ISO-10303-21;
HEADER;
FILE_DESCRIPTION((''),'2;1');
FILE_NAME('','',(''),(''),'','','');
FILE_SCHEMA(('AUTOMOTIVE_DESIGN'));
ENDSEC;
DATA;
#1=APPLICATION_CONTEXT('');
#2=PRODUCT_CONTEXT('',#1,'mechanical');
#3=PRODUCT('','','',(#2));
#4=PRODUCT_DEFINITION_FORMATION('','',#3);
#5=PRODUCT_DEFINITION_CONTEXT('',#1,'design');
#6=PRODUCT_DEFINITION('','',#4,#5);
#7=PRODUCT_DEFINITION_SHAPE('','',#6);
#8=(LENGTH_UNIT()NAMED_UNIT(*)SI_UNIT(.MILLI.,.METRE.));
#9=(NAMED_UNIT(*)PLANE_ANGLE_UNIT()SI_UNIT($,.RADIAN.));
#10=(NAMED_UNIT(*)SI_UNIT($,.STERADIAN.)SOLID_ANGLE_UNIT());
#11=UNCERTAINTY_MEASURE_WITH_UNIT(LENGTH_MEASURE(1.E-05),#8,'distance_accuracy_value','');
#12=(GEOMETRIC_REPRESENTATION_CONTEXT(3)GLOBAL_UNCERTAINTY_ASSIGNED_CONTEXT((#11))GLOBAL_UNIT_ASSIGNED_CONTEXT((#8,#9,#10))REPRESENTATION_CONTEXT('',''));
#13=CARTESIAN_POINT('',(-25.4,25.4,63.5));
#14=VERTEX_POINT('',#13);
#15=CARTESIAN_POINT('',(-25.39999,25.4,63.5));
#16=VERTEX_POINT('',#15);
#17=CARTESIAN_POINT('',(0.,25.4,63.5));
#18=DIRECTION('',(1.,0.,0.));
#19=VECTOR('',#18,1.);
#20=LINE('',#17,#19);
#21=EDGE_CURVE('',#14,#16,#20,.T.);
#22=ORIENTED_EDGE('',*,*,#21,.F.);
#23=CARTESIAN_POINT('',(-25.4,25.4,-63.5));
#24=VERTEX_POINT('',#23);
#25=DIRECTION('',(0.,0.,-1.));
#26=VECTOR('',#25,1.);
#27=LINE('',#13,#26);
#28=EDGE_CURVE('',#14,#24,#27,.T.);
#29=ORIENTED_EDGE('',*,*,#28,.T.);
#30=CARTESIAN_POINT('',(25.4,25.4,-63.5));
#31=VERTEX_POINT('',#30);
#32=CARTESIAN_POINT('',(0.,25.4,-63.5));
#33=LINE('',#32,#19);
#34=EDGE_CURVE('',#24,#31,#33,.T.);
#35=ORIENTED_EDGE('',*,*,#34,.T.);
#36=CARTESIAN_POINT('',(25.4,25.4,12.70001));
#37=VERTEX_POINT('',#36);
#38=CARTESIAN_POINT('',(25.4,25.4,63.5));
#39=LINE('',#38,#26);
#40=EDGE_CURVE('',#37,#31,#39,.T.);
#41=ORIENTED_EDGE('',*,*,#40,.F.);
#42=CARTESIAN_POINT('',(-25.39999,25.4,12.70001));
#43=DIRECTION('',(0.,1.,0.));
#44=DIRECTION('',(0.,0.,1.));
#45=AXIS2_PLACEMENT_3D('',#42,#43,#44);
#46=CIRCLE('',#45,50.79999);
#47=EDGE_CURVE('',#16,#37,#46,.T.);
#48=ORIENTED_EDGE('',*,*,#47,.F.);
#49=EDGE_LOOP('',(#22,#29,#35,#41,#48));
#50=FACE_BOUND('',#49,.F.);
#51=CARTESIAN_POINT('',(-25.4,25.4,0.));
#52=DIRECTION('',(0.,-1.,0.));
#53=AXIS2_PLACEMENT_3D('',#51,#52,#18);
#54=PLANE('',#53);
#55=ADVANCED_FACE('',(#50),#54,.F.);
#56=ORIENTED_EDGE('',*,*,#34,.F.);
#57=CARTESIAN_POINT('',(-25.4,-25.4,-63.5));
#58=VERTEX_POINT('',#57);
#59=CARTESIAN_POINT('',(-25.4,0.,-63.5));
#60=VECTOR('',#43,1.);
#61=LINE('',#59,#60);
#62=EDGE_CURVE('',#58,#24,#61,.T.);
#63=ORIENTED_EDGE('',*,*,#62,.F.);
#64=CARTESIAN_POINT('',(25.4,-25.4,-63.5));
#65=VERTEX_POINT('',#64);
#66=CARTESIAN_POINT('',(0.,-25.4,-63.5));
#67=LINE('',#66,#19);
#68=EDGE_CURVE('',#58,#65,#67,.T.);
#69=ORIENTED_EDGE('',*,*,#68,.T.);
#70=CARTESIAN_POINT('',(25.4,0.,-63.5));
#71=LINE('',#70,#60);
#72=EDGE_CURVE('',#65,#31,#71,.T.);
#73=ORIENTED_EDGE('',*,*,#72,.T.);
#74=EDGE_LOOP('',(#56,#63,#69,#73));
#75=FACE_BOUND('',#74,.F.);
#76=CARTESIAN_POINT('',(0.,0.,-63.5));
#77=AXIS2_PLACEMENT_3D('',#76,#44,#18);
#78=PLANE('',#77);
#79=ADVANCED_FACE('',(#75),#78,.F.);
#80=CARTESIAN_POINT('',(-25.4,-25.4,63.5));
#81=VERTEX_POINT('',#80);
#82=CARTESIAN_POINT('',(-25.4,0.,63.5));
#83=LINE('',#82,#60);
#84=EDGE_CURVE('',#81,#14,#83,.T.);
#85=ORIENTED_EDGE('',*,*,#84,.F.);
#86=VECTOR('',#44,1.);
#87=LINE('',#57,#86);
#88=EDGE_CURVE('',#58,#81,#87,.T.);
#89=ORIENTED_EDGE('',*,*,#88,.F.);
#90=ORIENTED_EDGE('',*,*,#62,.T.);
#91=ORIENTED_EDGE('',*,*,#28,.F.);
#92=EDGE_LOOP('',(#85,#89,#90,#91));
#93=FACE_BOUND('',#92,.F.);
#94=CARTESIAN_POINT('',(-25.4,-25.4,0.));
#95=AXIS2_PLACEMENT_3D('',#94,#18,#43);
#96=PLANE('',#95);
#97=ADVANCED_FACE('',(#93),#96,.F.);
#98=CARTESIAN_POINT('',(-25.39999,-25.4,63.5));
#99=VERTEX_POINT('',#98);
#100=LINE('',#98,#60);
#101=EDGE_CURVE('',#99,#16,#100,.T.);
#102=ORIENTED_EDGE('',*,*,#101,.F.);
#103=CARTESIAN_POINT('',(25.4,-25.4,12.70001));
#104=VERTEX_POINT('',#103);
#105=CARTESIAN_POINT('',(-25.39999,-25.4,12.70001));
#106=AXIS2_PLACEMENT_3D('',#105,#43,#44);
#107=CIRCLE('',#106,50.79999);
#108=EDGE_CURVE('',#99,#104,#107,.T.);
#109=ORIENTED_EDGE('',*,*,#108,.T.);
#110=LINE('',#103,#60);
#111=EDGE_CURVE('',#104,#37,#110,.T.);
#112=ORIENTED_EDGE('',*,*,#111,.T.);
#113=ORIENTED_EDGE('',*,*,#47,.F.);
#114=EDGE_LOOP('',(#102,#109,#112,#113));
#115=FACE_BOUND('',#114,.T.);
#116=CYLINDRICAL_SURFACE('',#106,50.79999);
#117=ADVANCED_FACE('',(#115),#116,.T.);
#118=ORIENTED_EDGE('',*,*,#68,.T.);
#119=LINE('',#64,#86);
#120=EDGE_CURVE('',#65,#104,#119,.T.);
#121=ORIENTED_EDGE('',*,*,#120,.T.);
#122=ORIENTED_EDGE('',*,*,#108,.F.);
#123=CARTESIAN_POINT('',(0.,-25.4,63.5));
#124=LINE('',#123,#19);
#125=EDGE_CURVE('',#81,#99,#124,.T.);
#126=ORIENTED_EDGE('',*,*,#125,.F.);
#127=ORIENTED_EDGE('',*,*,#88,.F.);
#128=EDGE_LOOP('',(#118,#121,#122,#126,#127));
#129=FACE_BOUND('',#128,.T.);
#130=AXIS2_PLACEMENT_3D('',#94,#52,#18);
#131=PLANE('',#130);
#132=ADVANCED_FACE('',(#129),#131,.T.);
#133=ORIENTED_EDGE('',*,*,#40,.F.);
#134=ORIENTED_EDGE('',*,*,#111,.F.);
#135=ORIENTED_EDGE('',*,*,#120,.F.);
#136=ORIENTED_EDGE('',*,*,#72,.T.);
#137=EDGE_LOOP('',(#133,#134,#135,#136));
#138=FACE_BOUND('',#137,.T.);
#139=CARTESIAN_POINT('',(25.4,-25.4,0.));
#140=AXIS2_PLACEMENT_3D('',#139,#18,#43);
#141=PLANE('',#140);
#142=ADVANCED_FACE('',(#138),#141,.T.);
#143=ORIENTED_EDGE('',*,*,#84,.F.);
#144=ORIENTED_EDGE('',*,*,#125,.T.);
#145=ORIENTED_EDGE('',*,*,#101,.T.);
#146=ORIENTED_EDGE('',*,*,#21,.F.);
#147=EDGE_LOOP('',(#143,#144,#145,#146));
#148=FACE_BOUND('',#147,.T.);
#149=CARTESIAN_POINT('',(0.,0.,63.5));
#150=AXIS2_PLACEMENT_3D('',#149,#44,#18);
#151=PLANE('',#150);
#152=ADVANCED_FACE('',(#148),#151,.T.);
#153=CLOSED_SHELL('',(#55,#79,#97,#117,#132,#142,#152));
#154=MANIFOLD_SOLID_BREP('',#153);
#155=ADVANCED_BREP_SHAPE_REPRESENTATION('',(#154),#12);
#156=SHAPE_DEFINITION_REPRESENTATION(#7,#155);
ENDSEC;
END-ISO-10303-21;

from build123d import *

# Parameters (mm, degrees)
F0_W     = 50.8
F0_H     = 50.8
F1_DEPTH = 63.5
F2_R     = 50.79999


# Not quite as in the source:
# - a fillet or chamfer is up to 0.001 mm smaller than in the source, because OpenCascade refuses the exact size


with BuildPart() as f1:
    # F0 (on Top) → F1 (new body, symmetric)
    with BuildSketch(Plane.XY):
        Rectangle(F0_W, F0_H)
    extrude(amount=F1_DEPTH, both=True)

    # F2 (radius 50.8 in the source; OpenCascade refuses exactly that, so slightly less here)
    f2_edges = [f1.edges().sort_by_distance(p)[0] for p in [
        (25.4, 0, 63.5),
    ]]
    fillet(f2_edges, radius=F2_R)


solid = f1.part
